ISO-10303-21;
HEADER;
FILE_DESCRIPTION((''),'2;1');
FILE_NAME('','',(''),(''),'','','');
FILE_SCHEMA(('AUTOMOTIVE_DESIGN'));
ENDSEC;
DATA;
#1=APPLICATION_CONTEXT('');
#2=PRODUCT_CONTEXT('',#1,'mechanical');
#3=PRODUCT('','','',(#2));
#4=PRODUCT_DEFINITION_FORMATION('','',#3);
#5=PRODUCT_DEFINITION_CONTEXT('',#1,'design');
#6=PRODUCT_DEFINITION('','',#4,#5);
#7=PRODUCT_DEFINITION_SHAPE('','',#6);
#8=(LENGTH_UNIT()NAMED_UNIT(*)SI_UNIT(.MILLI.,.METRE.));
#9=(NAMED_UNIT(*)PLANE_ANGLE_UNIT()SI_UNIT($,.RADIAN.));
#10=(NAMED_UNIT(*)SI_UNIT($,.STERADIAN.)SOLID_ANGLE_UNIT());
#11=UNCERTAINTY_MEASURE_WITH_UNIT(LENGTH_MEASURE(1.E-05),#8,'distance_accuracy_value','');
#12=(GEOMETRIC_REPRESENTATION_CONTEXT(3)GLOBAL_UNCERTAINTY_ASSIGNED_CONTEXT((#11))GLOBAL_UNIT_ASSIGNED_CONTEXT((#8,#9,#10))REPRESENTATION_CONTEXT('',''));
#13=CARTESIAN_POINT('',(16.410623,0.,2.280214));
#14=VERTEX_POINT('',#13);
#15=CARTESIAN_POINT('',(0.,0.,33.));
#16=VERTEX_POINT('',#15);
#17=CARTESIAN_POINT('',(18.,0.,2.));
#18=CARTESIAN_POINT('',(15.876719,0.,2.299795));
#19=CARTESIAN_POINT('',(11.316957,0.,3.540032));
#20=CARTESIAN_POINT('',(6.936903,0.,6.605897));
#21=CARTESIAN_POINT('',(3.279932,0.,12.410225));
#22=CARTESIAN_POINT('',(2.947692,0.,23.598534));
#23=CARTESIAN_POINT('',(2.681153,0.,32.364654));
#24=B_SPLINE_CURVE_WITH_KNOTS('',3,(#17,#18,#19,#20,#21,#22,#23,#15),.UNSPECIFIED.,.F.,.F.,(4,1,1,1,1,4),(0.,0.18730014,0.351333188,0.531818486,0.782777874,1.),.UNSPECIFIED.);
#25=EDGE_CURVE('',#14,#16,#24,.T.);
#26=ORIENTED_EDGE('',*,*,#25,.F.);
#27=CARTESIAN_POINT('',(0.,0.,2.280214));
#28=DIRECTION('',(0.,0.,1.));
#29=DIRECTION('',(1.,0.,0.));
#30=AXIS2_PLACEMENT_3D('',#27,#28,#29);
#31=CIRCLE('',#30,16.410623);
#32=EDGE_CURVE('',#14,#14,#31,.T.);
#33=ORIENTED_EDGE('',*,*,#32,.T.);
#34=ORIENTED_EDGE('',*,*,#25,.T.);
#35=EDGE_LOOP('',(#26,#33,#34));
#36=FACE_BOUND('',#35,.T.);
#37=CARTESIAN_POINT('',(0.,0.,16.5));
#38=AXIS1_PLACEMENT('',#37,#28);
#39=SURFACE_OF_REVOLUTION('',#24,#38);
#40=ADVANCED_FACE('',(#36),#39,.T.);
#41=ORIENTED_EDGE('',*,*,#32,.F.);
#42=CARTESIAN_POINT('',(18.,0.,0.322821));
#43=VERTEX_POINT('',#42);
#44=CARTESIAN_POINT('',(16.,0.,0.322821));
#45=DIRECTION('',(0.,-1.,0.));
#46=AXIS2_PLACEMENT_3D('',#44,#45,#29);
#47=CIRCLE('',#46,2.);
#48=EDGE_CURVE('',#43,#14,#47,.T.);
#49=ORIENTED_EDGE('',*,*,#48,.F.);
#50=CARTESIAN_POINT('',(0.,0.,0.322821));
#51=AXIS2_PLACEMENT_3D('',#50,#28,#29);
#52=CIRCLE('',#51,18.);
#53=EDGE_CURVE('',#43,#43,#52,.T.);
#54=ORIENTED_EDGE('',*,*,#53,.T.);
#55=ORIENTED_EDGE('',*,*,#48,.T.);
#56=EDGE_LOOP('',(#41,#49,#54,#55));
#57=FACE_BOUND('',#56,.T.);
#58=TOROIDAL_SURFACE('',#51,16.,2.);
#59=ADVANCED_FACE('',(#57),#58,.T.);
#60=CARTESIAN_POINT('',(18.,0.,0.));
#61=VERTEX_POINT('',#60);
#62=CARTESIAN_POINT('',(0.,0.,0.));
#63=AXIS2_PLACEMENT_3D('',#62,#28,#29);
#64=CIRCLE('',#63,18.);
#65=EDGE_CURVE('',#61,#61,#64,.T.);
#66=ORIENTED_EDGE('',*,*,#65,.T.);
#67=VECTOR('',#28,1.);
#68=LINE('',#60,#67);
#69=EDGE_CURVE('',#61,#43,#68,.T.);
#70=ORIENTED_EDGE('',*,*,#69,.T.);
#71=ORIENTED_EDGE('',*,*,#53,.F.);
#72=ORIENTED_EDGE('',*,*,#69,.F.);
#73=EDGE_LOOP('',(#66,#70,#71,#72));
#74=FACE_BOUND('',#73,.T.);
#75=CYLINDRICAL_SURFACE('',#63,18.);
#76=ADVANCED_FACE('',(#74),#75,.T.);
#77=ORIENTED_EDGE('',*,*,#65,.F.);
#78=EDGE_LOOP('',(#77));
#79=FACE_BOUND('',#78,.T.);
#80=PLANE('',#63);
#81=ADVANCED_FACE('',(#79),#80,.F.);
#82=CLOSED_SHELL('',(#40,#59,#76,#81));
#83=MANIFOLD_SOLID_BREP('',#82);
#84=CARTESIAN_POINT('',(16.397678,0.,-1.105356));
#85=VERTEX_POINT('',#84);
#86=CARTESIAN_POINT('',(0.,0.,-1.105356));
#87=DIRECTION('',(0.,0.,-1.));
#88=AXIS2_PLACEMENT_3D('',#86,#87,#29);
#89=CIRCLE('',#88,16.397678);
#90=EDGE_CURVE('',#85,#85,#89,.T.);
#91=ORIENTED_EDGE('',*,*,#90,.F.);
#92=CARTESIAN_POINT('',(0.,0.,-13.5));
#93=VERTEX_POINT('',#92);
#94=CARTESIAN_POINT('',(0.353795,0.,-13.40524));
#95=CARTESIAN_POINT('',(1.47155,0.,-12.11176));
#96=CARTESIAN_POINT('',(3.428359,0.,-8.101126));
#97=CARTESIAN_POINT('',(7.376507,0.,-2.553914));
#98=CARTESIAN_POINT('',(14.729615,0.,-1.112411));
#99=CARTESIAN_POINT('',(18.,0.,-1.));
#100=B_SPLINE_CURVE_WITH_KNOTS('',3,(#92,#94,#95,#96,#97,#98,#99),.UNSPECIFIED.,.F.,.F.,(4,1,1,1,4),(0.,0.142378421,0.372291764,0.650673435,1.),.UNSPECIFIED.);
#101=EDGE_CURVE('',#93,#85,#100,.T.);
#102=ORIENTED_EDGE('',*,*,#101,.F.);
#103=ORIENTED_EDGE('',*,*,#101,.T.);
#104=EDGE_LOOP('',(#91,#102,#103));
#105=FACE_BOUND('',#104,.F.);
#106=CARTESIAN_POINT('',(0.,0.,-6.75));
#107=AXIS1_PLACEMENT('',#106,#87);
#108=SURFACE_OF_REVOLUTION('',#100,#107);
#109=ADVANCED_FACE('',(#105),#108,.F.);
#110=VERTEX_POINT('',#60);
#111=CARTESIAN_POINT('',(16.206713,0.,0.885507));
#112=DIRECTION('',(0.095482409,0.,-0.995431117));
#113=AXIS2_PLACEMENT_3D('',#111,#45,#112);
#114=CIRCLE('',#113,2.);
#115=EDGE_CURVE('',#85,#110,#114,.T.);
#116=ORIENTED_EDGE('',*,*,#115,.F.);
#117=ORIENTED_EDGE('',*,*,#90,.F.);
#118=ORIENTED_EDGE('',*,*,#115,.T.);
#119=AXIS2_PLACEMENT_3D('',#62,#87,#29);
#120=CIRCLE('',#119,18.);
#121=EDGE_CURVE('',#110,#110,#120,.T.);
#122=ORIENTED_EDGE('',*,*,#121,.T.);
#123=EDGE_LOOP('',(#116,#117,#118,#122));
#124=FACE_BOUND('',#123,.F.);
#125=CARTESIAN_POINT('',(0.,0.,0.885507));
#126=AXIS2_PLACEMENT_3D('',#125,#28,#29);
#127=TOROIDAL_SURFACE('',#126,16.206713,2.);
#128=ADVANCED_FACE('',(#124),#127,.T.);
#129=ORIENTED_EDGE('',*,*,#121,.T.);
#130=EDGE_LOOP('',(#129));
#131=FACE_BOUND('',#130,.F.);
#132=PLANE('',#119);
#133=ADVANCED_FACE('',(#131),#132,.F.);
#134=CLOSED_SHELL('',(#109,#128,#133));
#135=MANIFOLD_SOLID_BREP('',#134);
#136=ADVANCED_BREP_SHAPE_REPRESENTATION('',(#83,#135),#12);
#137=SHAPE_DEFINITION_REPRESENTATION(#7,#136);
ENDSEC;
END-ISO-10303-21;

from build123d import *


# Not quite as in the source:
# - a fillet or chamfer that OpenCascade refuses, or shapes differently, is made with other operations: its cross-section is extruded or revolved along the edge and cut away or added


with BuildPart() as f1:
    # F0 (on Front) → F1 (revolve)
    with BuildSketch(Plane.XZ):
        with BuildLine():
            Line((0, 33), (0, 0))
            Line((0, 0), (18, 0))
            Line((18, 0), (18, 2))
            add(Edge.make_bspline(
                [(18, 2), (15.8767193278, 2.2997949203), (11.3169572026, 3.5400315099), (6.936903079, 6.6058969156), (3.2799320985, 12.4102253579), (2.9476917719, 23.598533786), (2.6811530149, 32.3646539521), (0, 33)],
                knots=[0, 0, 0, 0, 0.1873001398, 0.3513331882, 0.5318184857, 0.7827778744, 1, 1, 1, 1], degree=3))
        make_face()
    revolve(axis=Axis((0, 0, 16.5), (0, 0, 1)))

    # F4: fillet of radius 2 on 1 edges, made by hand

    # F4_s1 → F4_t2 (revolve, cut)
    with BuildSketch(Plane.XZ):
        with BuildLine():
            ThreePointArc((18, 0.3228205545), (17.5526182459, 1.5835253505), (16.4106234174, 2.2802138234))
            Line((16.4106234174, 2.2802138234), (16.4188358857, 2.3193616887))
            ThreePointArc((16.4188358857, 2.3193616887), (17.2099496362, 2.1663384242), (18.0055922997, 2.0396071481))
            Line((18.0055922997, 2.0396071481), (18.04, 2))
            Line((18.04, 2), (18.04, 0.3228205545))
            Line((18.04, 0.3228205545), (18, 0.3228205545))
        make_face()
    revolve(axis=Axis((0, 0, 2), (0, 0, 1)), mode=Mode.SUBTRACT)


with BuildPart() as f3:
    # F2 (on Front) → F3 (revolve)
    with BuildSketch(Plane.XZ):
        with BuildLine():
            Line((18, 0), (0, 0))
            Line((0, 0), (0, -13.5))
            add(Edge.make_bspline(
                [(0, -13.5), (0.3537948145, -13.4052397407), (1.4715501043, -12.1117596027), (3.428359406, -8.101125754), (7.3765069909, -2.5539137252), (14.7296146505, -1.1124110975), (18, -1)],
                knots=[0, 0, 0, 0, 0.1423784213, 0.3722917637, 0.6506734348, 1, 1, 1, 1], degree=3))
            Line((18, -1), (18, 0))
        make_face()
    revolve(axis=Axis((0, 0, -6.75), (0, 0, -1)))

    # F4#2: fillet of radius 2 on 1 edges, made by hand

    # F4_2_s1 → F4_2_t2 (revolve, cut)
    with BuildSketch(Plane.XZ):
        with BuildLine():
            ThreePointArc((16.3976778659, -1.1053556528), (17.3423919425, -0.7607720845), (18, 0))
            Line((18, 0), (18.035865739, -0.0177101316))
            ThreePointArc((18.035865739, -0.0177101316), (18.04, -0.5), (18.04, -1))
            Line((18.04, -1), (18.0013740858, -1.0399763916))
            ThreePointArc((18.0013740858, -1.0399763916), (17.2006681044, -1.0803582257), (16.4014971623, -1.1451728975))
            Line((16.4014971623, -1.1451728975), (16.3976778659, -1.1053556528))
        make_face()
    revolve(axis=Axis((0, 0, -1), (0, 0, -1)), mode=Mode.SUBTRACT)


solid = Compound([f1.part, f3.part])
